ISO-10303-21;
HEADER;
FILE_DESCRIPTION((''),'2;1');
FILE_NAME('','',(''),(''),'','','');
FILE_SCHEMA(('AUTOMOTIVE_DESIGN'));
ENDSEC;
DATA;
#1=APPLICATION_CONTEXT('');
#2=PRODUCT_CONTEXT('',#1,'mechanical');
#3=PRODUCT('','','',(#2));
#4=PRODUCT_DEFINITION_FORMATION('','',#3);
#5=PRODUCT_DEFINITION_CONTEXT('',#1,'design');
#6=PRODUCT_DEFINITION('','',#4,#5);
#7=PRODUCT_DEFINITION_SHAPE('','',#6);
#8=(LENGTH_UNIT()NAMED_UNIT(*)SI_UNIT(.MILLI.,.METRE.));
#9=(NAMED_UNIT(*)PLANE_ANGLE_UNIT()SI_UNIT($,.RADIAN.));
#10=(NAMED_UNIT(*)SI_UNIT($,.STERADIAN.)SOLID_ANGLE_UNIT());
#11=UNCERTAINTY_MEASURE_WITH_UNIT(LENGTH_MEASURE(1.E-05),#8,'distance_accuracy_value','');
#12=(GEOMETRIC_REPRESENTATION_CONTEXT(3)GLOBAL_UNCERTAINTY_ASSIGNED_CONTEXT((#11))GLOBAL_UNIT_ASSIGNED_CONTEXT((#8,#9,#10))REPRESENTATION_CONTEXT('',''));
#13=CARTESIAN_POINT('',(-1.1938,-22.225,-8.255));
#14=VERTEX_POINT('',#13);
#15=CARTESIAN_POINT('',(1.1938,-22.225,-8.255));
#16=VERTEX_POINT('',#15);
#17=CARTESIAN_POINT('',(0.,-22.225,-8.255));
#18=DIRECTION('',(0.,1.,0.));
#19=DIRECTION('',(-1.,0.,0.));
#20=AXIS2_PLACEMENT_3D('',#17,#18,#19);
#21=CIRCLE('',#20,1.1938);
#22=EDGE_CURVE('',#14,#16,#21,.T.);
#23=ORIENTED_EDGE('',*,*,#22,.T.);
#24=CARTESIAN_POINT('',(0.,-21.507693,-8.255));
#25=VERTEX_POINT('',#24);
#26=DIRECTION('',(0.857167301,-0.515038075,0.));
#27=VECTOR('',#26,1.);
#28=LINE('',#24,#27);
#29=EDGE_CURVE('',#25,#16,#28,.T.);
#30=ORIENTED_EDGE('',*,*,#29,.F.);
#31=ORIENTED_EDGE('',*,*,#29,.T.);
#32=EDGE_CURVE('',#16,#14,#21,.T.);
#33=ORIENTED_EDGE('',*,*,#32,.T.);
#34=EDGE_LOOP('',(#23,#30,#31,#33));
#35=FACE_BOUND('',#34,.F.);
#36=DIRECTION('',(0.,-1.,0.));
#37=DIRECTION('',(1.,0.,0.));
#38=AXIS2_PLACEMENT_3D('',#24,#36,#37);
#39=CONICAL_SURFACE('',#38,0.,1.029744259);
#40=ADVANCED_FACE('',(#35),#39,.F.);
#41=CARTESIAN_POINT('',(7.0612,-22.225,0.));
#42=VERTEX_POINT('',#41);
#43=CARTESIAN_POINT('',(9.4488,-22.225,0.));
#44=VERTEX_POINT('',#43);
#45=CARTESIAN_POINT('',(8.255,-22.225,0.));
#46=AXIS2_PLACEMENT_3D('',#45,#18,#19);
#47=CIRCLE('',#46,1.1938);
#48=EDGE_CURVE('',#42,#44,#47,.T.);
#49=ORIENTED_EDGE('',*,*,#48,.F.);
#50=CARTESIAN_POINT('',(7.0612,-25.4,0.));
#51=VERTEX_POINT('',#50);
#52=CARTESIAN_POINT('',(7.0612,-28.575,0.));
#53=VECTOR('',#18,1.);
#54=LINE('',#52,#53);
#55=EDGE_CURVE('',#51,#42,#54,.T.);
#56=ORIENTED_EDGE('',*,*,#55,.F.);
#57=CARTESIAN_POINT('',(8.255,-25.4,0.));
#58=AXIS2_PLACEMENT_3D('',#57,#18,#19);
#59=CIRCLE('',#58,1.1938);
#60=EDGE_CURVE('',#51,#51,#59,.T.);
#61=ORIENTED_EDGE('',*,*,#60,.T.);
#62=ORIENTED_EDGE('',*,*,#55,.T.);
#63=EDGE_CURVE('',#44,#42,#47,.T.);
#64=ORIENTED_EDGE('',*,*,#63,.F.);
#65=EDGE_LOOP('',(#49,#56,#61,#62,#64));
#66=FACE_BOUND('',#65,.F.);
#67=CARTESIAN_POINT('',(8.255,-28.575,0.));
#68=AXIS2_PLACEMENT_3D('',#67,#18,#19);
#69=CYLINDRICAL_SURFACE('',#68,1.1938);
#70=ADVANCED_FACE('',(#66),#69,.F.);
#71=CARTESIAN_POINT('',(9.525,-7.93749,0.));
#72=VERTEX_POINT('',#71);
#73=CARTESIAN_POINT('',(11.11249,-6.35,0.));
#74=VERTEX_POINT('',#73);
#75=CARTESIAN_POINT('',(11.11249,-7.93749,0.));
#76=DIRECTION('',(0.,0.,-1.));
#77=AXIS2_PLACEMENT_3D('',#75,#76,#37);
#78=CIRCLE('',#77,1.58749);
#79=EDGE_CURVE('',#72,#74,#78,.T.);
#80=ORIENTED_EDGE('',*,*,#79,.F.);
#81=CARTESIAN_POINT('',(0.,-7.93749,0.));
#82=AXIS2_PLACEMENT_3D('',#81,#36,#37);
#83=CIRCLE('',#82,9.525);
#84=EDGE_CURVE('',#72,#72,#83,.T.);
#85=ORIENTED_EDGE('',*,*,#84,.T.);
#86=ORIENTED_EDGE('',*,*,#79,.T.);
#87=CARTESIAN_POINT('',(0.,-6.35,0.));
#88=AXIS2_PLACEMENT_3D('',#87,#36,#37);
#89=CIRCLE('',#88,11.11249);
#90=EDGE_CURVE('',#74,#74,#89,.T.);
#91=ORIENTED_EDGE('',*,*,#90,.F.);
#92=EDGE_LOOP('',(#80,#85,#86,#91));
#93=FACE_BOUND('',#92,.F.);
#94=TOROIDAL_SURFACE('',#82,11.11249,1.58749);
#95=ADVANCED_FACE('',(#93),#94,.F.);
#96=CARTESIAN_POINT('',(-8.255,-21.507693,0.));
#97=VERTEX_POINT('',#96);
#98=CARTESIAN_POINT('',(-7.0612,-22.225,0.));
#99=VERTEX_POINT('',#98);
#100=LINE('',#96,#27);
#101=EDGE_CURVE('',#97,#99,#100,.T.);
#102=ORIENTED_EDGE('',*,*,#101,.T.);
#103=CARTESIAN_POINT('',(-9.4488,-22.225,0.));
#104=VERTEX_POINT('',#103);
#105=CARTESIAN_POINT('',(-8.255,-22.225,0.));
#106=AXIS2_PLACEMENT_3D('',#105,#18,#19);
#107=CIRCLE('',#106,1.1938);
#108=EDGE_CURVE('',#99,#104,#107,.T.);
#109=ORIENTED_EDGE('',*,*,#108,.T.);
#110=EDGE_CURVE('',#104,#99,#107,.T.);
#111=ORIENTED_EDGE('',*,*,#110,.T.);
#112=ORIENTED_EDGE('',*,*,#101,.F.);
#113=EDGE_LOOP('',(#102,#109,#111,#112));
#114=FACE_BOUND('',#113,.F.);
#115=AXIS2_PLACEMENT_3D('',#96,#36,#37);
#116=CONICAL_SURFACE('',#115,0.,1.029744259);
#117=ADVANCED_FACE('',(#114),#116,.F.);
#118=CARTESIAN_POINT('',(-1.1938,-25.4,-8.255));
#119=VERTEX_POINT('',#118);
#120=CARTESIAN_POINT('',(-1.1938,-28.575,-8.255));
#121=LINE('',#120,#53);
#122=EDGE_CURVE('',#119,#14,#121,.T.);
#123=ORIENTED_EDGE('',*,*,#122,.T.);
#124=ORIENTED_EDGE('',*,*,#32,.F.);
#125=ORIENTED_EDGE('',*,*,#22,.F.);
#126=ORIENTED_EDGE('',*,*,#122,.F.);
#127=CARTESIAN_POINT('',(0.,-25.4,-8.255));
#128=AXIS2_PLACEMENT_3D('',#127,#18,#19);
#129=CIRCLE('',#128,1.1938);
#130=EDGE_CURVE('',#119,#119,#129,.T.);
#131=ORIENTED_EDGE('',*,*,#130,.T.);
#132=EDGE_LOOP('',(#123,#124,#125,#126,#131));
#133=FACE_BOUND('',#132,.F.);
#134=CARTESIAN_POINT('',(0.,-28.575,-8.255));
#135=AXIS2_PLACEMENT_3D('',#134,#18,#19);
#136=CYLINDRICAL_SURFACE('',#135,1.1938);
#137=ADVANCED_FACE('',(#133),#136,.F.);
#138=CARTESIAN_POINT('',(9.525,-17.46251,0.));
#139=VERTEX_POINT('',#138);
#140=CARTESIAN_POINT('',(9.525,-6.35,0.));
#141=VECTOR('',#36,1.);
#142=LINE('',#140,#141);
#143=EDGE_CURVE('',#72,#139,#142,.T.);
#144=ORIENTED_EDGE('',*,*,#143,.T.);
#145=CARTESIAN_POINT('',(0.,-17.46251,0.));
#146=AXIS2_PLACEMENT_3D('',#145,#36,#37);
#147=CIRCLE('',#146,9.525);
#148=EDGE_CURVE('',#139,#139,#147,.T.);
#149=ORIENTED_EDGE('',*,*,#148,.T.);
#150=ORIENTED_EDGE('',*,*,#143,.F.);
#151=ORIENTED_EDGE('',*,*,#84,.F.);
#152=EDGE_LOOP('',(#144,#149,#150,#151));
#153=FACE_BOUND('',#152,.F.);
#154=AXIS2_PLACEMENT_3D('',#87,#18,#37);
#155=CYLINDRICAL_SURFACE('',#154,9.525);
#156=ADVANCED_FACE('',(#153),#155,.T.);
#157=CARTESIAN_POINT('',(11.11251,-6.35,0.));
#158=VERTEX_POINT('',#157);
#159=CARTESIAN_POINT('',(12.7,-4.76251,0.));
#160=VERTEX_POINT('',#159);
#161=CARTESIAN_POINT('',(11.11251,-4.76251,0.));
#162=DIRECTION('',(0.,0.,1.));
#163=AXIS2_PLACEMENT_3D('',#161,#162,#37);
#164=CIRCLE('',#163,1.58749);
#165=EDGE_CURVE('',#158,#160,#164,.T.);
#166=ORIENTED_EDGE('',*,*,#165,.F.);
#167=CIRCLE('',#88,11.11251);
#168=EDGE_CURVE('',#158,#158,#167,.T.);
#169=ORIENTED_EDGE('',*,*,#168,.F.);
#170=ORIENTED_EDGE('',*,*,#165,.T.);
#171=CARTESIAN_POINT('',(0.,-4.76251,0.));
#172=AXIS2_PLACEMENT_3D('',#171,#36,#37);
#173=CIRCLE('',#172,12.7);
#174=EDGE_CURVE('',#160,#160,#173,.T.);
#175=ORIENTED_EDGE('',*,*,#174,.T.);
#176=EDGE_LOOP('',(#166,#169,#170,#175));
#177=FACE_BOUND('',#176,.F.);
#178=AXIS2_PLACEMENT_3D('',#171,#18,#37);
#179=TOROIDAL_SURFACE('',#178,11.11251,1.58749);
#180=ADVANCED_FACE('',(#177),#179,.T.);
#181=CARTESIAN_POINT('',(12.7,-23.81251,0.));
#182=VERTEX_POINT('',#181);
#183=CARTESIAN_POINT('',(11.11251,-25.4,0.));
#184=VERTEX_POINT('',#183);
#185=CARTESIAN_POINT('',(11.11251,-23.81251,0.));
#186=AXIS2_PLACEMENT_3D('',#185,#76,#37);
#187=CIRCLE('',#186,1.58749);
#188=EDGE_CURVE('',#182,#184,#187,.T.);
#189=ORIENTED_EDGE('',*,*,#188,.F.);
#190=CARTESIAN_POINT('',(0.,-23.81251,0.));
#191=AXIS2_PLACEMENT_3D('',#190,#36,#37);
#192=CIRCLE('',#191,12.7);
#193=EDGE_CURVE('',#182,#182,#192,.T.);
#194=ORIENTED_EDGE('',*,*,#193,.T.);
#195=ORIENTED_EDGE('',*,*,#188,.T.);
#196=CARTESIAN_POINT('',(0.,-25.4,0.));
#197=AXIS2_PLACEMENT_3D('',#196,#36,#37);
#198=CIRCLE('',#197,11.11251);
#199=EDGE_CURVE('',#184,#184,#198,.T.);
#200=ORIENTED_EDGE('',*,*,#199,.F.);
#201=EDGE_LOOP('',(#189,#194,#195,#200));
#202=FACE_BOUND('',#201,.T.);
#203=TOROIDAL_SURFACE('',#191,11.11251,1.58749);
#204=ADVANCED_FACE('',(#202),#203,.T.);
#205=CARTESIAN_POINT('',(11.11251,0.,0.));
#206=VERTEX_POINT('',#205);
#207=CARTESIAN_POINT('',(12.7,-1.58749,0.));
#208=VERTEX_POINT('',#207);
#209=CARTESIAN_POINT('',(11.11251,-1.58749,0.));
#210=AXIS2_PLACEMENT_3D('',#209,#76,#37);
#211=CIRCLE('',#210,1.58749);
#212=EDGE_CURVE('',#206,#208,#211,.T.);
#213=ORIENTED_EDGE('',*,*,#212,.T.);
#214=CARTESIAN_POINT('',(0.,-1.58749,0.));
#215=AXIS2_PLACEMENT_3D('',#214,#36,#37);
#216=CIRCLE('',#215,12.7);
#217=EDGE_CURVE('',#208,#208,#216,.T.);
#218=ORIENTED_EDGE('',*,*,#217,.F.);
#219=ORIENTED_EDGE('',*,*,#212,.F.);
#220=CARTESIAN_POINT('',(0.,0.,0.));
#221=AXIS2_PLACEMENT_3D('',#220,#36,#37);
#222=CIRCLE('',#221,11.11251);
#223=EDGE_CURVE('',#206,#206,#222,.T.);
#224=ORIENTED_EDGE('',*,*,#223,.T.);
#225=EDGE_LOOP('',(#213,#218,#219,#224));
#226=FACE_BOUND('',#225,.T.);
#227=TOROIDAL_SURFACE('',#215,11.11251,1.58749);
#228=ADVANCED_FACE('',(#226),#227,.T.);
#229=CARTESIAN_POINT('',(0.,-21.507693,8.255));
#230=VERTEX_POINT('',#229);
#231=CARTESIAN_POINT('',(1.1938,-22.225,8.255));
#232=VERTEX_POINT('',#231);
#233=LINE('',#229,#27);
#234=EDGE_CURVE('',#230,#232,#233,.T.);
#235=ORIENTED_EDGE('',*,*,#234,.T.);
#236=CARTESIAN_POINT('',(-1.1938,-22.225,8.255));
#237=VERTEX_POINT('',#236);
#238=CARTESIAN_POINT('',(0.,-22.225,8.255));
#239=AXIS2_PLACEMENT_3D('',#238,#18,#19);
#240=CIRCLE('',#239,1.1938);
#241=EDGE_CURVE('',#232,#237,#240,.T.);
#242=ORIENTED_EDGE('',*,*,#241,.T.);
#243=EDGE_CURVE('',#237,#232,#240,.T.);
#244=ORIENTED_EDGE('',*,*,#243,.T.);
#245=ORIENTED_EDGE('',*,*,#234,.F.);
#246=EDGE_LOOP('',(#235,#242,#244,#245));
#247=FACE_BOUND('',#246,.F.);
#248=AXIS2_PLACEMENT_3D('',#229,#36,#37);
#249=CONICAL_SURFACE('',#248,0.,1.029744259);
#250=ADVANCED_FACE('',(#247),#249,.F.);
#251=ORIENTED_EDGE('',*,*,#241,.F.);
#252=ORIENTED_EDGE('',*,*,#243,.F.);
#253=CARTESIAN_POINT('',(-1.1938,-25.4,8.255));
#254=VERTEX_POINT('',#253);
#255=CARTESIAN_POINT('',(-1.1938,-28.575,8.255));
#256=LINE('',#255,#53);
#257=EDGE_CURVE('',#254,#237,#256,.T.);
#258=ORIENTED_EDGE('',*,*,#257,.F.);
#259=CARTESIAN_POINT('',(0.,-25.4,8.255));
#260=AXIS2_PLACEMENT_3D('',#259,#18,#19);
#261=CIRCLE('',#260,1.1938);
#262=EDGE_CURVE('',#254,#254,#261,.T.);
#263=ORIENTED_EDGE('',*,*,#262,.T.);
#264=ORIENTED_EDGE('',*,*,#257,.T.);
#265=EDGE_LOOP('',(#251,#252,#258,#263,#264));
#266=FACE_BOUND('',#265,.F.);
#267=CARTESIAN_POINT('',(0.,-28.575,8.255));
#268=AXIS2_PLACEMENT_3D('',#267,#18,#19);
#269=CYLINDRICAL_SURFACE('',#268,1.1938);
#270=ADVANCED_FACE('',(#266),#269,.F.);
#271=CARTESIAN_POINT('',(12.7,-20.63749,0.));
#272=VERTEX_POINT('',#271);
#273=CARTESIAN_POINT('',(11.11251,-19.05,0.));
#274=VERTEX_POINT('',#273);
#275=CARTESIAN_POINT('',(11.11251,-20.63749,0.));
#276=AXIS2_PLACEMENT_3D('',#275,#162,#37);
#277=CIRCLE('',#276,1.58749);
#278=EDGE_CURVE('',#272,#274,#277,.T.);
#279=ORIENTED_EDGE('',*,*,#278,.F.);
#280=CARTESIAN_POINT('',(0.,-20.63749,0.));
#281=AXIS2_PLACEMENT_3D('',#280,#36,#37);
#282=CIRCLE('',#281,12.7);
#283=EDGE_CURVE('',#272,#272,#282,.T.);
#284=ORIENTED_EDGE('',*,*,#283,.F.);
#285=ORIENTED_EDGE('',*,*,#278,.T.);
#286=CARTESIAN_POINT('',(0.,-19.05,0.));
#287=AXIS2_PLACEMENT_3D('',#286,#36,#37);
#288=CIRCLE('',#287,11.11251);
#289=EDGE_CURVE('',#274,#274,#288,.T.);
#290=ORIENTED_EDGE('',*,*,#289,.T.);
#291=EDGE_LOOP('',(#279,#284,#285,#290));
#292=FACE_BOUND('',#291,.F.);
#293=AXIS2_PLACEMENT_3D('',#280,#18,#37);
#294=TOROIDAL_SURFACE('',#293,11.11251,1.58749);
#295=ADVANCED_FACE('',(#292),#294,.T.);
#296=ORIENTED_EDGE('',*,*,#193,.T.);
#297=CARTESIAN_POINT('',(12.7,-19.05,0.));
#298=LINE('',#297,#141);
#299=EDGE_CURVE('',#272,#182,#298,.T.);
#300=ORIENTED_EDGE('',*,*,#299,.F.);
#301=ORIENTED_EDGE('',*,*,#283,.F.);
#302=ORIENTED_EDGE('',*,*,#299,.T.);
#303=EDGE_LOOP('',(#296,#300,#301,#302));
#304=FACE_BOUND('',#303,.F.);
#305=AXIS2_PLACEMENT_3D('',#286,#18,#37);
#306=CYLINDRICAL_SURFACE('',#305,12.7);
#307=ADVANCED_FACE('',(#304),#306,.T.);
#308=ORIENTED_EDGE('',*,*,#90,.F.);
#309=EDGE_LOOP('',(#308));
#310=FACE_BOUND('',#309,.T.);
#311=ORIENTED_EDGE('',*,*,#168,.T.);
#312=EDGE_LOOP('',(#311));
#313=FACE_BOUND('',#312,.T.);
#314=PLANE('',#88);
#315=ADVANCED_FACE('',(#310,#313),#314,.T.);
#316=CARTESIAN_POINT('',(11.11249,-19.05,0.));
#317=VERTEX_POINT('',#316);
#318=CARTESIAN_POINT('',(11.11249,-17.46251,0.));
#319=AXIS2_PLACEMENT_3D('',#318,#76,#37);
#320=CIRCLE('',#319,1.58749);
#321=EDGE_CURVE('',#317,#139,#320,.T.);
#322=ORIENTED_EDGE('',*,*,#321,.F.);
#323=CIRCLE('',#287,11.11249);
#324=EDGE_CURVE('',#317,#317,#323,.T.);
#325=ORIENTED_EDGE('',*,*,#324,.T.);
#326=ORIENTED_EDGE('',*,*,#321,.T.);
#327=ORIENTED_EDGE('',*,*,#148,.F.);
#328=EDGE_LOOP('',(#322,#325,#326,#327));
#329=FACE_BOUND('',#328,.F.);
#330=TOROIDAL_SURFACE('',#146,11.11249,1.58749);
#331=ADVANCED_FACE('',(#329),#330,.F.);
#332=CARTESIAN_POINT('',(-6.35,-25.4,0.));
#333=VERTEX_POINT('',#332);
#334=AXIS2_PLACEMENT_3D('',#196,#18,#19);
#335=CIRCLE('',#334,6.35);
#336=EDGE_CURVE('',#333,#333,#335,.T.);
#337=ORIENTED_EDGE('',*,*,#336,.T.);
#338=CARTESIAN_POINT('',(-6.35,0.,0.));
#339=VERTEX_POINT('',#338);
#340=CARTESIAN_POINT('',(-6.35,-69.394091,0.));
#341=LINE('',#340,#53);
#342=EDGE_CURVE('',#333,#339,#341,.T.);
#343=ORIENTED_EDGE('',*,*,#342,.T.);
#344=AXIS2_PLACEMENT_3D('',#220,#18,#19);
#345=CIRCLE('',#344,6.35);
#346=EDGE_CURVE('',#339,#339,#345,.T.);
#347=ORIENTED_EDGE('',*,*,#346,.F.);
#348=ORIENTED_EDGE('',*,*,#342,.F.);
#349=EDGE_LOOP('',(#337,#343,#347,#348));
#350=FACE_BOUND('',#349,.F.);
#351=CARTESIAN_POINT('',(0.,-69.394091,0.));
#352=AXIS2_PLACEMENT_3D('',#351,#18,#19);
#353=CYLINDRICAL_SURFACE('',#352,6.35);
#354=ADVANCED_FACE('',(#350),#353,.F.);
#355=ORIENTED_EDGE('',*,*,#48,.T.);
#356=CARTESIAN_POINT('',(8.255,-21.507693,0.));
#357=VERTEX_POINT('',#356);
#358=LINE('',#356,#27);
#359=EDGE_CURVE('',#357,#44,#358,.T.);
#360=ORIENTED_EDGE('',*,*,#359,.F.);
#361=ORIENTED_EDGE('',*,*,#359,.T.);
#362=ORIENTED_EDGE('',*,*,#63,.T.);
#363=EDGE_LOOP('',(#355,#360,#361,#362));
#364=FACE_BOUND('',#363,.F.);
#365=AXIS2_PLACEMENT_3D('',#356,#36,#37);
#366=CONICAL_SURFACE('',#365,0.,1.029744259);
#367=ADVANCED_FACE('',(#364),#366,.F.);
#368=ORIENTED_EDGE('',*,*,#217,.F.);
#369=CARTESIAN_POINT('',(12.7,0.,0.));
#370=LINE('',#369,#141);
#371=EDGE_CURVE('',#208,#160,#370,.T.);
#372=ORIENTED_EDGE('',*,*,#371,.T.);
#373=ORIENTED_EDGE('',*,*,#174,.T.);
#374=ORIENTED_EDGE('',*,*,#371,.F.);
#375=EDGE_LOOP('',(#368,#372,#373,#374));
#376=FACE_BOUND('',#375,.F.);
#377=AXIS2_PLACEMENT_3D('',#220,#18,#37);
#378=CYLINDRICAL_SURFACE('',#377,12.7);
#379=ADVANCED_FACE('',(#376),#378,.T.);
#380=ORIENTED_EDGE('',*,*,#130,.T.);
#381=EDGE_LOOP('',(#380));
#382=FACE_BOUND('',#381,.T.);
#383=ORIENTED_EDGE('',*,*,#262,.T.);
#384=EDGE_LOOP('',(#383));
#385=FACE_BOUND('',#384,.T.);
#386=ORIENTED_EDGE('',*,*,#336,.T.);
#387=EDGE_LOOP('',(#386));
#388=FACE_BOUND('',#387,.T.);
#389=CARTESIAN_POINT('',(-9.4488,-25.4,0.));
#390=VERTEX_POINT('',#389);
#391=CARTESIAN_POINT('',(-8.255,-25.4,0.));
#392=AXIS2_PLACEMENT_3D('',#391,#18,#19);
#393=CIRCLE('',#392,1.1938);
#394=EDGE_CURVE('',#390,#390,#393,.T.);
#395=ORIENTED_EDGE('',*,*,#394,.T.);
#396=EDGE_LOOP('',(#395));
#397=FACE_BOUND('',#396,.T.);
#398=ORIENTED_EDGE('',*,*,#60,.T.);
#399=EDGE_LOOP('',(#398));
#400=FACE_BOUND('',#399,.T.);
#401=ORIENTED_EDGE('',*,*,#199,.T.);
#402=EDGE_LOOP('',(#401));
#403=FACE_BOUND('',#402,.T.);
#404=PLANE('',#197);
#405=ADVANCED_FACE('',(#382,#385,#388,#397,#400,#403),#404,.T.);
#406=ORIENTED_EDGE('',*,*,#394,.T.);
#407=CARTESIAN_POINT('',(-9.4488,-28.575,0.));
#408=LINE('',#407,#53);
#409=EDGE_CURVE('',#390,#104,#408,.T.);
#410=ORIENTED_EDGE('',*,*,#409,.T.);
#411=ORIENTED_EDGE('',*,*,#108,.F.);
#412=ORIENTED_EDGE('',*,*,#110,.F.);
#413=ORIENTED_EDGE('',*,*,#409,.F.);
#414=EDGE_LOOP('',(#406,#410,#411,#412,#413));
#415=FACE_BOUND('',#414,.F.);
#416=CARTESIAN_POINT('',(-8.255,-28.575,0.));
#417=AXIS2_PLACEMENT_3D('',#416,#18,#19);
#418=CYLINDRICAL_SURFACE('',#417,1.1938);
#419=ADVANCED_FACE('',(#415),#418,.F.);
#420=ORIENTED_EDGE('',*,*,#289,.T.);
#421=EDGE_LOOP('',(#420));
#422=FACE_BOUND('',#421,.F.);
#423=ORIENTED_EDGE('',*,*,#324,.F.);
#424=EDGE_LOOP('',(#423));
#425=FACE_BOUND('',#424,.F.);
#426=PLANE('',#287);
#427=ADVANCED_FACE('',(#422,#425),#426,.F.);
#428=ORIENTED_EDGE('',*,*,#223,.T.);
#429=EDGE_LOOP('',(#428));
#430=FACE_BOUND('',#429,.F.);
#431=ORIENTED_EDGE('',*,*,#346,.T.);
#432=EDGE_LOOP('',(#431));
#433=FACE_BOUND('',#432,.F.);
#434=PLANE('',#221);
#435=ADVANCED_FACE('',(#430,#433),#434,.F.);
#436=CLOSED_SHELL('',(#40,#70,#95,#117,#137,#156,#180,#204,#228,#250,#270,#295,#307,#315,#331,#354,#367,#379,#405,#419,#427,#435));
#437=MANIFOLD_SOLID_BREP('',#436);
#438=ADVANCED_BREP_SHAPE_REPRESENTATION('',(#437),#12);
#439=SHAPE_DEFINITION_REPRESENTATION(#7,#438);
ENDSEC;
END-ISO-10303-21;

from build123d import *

# Parameters (mm, degrees)
F0_R     = 12.7
F1_DEPTH = 6.35
F2_R     = 9.525
F3_DEPTH = 12.7
F4_R     = 12.7
F5_DEPTH = 6.35
F7_D     = 12.7
F8_D     = 2.3876
F8_DEPTH = 3.175
F8_TIP   = 0.717307407
F9_R     = 1.58749


# Not quite as in the source:
# - a fillet or chamfer is up to 0.001 mm smaller than in the source, because OpenCascade refuses the exact size


with BuildPart() as f1:
    # F0 (on Front) → F1 (new body)
    with BuildSketch(Plane.XZ):
        Circle(F0_R)
    extrude(amount=F1_DEPTH)

    # F2 (on face) → F3 (join)
    with BuildSketch(Plane.XZ.offset(6.35)):
        Circle(F2_R)
    extrude(amount=F3_DEPTH)

    # F4 (on face) → F5 (join)
    with BuildSketch(Plane.XZ.offset(19.05)):
        Circle(F4_R)
    extrude(amount=F5_DEPTH)

    # F7 (through all)
    with Locations(Plane.XZ.offset(25.4)):
        with Locations((0, 0)):
            Hole(F7_D / 2)

    # F8
    with Locations(Plane.XZ.offset(25.4)):
        with Locations((-8.255, 0), (0, 8.255), (8.255, 0), (0, -8.255)):
            Hole(F8_D / 2, depth=F8_DEPTH)
            with Locations((0, 0, -(F8_DEPTH + F8_TIP / 2))):  # 118° drill point
                Cone(0, F8_D / 2, F8_TIP, mode=Mode.SUBTRACT)

    # F9 (radius 1.5875 in the source; OpenCascade refuses exactly that, so slightly less here)
    f9_edges = [f1.edges().sort_by_distance(p)[0] for p in [
        (-12.7, -25.4, 0),
        (-12.7, -19.05, 0),
        (-12.7, -6.35, 0),
        (-12.7, 0, 0),
        (-9.525, -6.35, 0),
        (-9.525, -19.05, 0),
    ]]
    fillet(f9_edges, radius=F9_R)


solid = f1.part
